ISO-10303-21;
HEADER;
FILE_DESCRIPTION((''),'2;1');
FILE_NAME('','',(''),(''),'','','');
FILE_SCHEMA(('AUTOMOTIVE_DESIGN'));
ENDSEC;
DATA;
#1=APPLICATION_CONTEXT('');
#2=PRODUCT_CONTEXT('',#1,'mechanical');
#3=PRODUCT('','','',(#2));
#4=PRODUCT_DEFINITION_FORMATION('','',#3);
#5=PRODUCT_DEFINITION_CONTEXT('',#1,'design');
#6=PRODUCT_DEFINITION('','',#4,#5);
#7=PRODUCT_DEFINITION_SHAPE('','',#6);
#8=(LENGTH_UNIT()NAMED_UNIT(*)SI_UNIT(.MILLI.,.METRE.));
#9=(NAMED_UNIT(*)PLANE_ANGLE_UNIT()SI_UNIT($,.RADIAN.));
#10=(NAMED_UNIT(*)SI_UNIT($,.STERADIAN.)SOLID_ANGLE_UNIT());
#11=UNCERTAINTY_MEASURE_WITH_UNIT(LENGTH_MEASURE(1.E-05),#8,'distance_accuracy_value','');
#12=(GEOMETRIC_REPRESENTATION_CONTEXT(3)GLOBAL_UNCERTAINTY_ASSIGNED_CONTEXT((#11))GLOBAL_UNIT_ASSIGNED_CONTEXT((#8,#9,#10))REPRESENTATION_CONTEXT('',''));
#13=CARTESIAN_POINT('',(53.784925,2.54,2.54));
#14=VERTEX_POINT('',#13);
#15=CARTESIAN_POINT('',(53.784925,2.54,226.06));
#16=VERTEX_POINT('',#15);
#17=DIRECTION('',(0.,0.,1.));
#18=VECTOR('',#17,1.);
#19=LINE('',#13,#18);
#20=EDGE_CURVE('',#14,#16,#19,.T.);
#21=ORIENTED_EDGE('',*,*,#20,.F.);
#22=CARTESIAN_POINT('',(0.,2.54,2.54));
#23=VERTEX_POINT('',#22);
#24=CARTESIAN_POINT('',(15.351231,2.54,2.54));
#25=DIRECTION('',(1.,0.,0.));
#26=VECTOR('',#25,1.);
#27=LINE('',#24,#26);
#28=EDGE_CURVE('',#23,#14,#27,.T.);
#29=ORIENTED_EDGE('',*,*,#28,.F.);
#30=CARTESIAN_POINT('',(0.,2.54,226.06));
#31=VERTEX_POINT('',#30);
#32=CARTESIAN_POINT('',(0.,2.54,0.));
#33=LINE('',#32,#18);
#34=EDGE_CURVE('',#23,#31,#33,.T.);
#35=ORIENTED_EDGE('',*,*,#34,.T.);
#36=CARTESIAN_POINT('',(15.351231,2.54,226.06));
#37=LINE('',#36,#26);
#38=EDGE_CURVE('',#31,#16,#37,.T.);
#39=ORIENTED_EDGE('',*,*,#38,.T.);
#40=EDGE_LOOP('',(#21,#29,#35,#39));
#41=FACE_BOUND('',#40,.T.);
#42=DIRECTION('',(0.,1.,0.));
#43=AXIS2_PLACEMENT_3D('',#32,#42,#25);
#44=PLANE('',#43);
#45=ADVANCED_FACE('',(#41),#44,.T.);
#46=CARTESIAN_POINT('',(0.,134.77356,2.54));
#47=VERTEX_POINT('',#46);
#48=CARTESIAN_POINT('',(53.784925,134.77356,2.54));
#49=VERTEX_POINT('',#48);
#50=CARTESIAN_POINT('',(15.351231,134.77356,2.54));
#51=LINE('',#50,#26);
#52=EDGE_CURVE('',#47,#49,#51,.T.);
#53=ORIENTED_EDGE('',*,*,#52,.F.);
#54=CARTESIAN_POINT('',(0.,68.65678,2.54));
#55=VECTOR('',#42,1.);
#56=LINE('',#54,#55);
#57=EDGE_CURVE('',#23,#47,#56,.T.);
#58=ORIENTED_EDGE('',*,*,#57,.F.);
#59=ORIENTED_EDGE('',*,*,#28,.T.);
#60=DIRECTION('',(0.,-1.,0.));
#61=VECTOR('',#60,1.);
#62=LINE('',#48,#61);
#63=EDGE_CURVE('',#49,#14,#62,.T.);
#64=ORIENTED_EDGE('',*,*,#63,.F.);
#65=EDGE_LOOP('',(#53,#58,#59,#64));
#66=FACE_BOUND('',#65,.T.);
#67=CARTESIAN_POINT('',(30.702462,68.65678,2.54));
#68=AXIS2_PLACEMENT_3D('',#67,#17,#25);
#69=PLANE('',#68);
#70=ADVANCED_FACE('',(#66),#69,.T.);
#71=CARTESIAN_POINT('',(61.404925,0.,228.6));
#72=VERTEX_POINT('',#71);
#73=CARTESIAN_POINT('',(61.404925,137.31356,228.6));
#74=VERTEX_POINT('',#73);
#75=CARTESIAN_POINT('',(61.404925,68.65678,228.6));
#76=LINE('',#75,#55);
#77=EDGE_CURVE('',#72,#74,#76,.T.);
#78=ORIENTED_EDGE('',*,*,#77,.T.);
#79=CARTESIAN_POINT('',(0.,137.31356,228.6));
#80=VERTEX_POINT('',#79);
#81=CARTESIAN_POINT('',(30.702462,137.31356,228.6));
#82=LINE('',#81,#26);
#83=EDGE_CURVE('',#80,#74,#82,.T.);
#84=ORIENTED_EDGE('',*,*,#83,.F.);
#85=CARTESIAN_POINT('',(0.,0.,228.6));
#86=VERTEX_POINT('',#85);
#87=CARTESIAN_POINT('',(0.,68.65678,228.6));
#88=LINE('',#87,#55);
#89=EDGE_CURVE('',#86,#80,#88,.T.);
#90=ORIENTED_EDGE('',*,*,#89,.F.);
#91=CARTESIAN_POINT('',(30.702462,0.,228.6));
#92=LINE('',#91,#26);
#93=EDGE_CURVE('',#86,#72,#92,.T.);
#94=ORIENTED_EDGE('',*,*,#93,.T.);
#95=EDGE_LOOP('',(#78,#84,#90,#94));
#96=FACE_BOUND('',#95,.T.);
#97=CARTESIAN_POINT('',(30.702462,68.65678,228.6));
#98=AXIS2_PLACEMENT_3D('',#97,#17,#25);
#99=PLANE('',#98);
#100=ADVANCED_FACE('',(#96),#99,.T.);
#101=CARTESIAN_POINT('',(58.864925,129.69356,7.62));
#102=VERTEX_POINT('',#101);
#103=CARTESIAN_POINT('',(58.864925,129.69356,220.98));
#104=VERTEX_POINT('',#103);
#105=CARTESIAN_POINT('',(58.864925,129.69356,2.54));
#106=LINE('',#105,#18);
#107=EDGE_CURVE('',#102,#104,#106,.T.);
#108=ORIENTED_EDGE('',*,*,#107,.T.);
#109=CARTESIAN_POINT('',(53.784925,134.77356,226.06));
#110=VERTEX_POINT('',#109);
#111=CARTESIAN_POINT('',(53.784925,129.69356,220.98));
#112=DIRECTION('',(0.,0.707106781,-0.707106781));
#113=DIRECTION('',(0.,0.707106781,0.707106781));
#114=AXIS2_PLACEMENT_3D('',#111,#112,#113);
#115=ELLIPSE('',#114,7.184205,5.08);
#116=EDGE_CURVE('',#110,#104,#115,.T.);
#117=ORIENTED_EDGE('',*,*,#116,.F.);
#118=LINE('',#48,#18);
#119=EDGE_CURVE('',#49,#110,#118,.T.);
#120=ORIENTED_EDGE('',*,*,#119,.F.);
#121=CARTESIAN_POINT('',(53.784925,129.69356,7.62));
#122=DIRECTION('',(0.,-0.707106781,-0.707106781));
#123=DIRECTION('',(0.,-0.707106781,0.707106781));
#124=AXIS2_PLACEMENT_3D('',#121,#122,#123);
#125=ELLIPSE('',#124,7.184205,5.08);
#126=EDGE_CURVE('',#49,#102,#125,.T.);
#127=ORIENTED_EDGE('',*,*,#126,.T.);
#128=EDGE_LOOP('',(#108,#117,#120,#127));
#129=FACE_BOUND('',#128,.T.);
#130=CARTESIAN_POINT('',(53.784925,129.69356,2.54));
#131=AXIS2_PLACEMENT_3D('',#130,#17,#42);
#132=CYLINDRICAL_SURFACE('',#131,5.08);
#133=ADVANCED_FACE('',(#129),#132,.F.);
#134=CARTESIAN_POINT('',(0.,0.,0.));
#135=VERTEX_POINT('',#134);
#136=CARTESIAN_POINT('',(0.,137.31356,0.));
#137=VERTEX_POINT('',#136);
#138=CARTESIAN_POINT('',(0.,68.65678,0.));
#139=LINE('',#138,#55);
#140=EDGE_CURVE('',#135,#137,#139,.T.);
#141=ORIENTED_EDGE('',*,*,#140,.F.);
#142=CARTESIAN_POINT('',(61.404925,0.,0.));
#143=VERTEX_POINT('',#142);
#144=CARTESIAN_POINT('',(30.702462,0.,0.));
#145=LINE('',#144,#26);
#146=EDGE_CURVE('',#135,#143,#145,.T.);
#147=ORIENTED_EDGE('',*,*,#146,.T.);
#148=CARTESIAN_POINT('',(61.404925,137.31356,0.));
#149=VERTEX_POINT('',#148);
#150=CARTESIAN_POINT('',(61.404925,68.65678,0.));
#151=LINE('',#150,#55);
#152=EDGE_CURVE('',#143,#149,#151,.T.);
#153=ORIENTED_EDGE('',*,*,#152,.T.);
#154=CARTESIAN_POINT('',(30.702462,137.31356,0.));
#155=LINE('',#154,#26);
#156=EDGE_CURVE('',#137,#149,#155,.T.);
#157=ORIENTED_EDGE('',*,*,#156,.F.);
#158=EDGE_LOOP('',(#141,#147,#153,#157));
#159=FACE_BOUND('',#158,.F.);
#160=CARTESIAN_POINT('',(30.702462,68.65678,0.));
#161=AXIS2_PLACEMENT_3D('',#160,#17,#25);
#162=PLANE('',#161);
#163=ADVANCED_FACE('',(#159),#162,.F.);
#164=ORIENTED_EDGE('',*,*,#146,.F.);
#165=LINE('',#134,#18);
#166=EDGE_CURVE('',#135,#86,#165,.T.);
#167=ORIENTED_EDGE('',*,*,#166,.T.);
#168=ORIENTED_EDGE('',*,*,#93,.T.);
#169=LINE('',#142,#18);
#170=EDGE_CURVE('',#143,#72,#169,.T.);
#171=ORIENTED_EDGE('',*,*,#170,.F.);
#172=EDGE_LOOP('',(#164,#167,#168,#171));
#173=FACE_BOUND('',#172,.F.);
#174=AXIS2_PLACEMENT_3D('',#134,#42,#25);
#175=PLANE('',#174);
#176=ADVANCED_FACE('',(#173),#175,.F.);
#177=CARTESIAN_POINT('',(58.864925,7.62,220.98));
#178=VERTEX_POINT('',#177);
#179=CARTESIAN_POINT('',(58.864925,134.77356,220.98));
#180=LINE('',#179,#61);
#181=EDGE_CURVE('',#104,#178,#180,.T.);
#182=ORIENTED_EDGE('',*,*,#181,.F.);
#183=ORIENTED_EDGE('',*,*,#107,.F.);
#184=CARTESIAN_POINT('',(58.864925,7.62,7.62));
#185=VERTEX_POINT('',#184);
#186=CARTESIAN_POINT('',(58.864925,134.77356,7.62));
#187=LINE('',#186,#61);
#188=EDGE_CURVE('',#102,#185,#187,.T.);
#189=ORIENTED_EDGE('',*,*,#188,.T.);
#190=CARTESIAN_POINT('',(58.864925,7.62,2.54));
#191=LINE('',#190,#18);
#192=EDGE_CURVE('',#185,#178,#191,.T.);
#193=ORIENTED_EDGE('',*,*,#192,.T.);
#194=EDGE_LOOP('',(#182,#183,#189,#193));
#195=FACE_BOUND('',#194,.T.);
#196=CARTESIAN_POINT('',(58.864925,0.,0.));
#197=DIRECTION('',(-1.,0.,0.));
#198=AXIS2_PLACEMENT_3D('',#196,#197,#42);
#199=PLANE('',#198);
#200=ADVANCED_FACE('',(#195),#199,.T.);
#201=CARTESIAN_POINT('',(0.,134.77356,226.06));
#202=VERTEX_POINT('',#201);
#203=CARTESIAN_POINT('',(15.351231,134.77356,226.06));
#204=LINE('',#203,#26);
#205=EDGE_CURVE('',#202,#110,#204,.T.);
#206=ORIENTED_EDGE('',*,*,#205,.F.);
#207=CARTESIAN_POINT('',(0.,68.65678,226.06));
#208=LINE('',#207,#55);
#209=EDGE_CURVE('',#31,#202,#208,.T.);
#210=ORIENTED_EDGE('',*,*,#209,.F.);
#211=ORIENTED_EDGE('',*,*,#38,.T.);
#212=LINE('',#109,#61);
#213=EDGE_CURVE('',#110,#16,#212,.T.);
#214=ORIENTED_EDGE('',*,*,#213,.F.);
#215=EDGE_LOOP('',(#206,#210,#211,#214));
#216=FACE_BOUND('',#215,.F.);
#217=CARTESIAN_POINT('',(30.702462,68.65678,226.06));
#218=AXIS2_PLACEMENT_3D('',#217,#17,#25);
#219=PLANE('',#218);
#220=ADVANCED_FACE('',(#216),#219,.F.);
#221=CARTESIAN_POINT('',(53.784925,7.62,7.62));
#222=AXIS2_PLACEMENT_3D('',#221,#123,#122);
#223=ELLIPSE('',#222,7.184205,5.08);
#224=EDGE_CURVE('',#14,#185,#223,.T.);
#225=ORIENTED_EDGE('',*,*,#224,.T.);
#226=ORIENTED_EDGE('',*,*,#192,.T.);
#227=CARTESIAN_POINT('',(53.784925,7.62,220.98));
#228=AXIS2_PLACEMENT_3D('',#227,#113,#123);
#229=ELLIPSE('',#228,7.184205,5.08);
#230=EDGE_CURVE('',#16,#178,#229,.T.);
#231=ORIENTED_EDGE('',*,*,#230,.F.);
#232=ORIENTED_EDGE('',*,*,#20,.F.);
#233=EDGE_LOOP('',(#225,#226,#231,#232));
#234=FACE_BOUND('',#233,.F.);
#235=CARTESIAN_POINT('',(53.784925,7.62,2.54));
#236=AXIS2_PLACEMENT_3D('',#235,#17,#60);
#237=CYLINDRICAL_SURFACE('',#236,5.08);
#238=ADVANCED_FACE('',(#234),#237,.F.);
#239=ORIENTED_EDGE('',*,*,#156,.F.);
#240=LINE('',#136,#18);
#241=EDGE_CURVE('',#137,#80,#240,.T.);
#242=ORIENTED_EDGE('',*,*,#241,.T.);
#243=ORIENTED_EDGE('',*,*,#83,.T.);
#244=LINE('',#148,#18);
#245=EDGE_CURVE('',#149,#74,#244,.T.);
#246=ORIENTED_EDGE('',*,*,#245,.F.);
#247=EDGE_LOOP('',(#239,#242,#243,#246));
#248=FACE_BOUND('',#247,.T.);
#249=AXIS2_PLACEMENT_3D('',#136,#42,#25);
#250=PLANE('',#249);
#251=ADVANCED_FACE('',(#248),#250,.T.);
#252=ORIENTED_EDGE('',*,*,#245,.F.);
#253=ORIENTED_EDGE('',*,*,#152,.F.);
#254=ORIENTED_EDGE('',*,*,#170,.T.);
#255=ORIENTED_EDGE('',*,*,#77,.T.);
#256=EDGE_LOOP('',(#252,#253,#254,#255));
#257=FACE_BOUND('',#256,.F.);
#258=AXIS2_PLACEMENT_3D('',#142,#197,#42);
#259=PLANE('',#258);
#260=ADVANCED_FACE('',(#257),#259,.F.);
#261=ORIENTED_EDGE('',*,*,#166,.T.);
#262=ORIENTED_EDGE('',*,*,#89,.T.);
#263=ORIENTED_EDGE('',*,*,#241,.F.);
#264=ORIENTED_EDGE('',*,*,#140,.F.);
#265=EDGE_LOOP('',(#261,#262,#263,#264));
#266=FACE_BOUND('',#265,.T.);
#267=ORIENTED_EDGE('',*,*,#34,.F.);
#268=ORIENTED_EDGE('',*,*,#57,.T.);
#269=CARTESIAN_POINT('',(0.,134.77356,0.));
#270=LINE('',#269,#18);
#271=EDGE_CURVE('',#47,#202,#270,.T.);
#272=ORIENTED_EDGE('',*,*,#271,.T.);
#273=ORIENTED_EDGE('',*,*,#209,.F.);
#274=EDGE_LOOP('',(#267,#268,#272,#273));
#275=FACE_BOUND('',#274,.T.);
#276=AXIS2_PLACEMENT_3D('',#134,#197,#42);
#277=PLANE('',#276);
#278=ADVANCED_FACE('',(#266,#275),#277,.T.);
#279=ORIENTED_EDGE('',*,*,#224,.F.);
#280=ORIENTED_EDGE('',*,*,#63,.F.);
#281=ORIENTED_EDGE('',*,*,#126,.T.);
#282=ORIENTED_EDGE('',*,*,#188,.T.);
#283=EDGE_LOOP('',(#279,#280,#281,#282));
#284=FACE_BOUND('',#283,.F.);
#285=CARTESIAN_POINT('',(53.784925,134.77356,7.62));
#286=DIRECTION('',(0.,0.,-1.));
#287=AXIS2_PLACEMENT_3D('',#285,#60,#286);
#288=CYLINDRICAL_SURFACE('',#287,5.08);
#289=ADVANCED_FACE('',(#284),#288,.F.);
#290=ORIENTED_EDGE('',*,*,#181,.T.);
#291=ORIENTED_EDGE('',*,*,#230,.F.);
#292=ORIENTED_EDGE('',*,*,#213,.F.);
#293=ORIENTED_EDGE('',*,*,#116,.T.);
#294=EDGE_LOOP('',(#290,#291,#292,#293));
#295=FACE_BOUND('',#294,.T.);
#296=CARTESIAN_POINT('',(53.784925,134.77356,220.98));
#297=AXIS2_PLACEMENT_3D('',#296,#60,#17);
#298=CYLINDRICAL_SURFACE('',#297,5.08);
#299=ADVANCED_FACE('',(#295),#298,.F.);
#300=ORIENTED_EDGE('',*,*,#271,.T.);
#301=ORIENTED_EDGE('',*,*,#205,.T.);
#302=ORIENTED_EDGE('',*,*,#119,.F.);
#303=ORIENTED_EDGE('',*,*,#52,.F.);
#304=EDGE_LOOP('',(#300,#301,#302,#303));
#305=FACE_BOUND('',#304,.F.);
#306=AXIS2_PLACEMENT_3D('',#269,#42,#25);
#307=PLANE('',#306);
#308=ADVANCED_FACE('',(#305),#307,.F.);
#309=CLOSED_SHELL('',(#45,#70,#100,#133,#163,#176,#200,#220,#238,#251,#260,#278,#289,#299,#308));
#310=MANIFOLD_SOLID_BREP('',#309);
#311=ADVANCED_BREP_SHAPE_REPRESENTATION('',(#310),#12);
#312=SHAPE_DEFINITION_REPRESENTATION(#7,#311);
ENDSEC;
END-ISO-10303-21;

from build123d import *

# Parameters (mm, degrees)
F0_W     = 61.4049248397
F0_H     = 137.3135596514
F1_DEPTH = 228.6
F2_T     = -2.54
F7_R     = 5.08


# Not quite as in the source:
# - the program builds the solid bodies; features that only make, move or delete a surface that nothing else refers to are left out


with BuildPart() as f1:
    # F0 (on Top) → F1 (new body)
    with BuildSketch(Plane.XY):
        with Locations((30.7024624199, 68.6567798257)):
            Rectangle(F0_W, F0_H)
    extrude(amount=F1_DEPTH)

    # F2
    f2_openings = [f1.faces().sort_by_distance(p)[0] for p in [
        (0, 68.65678, 114.3),
    ]]
    offset(amount=F2_T, openings=f2_openings)

    # F7
    f7_edges = [f1.edges().sort_by_distance(p)[0] for p in [
        (58.864925, 134.77356, 114.3),
        (58.864925, 68.65678, 2.54),
        (58.864925, 2.54, 114.3),
        (58.864925, 68.65678, 226.06),
    ]]
    fillet(f7_edges, radius=F7_R)


solid = f1.part
